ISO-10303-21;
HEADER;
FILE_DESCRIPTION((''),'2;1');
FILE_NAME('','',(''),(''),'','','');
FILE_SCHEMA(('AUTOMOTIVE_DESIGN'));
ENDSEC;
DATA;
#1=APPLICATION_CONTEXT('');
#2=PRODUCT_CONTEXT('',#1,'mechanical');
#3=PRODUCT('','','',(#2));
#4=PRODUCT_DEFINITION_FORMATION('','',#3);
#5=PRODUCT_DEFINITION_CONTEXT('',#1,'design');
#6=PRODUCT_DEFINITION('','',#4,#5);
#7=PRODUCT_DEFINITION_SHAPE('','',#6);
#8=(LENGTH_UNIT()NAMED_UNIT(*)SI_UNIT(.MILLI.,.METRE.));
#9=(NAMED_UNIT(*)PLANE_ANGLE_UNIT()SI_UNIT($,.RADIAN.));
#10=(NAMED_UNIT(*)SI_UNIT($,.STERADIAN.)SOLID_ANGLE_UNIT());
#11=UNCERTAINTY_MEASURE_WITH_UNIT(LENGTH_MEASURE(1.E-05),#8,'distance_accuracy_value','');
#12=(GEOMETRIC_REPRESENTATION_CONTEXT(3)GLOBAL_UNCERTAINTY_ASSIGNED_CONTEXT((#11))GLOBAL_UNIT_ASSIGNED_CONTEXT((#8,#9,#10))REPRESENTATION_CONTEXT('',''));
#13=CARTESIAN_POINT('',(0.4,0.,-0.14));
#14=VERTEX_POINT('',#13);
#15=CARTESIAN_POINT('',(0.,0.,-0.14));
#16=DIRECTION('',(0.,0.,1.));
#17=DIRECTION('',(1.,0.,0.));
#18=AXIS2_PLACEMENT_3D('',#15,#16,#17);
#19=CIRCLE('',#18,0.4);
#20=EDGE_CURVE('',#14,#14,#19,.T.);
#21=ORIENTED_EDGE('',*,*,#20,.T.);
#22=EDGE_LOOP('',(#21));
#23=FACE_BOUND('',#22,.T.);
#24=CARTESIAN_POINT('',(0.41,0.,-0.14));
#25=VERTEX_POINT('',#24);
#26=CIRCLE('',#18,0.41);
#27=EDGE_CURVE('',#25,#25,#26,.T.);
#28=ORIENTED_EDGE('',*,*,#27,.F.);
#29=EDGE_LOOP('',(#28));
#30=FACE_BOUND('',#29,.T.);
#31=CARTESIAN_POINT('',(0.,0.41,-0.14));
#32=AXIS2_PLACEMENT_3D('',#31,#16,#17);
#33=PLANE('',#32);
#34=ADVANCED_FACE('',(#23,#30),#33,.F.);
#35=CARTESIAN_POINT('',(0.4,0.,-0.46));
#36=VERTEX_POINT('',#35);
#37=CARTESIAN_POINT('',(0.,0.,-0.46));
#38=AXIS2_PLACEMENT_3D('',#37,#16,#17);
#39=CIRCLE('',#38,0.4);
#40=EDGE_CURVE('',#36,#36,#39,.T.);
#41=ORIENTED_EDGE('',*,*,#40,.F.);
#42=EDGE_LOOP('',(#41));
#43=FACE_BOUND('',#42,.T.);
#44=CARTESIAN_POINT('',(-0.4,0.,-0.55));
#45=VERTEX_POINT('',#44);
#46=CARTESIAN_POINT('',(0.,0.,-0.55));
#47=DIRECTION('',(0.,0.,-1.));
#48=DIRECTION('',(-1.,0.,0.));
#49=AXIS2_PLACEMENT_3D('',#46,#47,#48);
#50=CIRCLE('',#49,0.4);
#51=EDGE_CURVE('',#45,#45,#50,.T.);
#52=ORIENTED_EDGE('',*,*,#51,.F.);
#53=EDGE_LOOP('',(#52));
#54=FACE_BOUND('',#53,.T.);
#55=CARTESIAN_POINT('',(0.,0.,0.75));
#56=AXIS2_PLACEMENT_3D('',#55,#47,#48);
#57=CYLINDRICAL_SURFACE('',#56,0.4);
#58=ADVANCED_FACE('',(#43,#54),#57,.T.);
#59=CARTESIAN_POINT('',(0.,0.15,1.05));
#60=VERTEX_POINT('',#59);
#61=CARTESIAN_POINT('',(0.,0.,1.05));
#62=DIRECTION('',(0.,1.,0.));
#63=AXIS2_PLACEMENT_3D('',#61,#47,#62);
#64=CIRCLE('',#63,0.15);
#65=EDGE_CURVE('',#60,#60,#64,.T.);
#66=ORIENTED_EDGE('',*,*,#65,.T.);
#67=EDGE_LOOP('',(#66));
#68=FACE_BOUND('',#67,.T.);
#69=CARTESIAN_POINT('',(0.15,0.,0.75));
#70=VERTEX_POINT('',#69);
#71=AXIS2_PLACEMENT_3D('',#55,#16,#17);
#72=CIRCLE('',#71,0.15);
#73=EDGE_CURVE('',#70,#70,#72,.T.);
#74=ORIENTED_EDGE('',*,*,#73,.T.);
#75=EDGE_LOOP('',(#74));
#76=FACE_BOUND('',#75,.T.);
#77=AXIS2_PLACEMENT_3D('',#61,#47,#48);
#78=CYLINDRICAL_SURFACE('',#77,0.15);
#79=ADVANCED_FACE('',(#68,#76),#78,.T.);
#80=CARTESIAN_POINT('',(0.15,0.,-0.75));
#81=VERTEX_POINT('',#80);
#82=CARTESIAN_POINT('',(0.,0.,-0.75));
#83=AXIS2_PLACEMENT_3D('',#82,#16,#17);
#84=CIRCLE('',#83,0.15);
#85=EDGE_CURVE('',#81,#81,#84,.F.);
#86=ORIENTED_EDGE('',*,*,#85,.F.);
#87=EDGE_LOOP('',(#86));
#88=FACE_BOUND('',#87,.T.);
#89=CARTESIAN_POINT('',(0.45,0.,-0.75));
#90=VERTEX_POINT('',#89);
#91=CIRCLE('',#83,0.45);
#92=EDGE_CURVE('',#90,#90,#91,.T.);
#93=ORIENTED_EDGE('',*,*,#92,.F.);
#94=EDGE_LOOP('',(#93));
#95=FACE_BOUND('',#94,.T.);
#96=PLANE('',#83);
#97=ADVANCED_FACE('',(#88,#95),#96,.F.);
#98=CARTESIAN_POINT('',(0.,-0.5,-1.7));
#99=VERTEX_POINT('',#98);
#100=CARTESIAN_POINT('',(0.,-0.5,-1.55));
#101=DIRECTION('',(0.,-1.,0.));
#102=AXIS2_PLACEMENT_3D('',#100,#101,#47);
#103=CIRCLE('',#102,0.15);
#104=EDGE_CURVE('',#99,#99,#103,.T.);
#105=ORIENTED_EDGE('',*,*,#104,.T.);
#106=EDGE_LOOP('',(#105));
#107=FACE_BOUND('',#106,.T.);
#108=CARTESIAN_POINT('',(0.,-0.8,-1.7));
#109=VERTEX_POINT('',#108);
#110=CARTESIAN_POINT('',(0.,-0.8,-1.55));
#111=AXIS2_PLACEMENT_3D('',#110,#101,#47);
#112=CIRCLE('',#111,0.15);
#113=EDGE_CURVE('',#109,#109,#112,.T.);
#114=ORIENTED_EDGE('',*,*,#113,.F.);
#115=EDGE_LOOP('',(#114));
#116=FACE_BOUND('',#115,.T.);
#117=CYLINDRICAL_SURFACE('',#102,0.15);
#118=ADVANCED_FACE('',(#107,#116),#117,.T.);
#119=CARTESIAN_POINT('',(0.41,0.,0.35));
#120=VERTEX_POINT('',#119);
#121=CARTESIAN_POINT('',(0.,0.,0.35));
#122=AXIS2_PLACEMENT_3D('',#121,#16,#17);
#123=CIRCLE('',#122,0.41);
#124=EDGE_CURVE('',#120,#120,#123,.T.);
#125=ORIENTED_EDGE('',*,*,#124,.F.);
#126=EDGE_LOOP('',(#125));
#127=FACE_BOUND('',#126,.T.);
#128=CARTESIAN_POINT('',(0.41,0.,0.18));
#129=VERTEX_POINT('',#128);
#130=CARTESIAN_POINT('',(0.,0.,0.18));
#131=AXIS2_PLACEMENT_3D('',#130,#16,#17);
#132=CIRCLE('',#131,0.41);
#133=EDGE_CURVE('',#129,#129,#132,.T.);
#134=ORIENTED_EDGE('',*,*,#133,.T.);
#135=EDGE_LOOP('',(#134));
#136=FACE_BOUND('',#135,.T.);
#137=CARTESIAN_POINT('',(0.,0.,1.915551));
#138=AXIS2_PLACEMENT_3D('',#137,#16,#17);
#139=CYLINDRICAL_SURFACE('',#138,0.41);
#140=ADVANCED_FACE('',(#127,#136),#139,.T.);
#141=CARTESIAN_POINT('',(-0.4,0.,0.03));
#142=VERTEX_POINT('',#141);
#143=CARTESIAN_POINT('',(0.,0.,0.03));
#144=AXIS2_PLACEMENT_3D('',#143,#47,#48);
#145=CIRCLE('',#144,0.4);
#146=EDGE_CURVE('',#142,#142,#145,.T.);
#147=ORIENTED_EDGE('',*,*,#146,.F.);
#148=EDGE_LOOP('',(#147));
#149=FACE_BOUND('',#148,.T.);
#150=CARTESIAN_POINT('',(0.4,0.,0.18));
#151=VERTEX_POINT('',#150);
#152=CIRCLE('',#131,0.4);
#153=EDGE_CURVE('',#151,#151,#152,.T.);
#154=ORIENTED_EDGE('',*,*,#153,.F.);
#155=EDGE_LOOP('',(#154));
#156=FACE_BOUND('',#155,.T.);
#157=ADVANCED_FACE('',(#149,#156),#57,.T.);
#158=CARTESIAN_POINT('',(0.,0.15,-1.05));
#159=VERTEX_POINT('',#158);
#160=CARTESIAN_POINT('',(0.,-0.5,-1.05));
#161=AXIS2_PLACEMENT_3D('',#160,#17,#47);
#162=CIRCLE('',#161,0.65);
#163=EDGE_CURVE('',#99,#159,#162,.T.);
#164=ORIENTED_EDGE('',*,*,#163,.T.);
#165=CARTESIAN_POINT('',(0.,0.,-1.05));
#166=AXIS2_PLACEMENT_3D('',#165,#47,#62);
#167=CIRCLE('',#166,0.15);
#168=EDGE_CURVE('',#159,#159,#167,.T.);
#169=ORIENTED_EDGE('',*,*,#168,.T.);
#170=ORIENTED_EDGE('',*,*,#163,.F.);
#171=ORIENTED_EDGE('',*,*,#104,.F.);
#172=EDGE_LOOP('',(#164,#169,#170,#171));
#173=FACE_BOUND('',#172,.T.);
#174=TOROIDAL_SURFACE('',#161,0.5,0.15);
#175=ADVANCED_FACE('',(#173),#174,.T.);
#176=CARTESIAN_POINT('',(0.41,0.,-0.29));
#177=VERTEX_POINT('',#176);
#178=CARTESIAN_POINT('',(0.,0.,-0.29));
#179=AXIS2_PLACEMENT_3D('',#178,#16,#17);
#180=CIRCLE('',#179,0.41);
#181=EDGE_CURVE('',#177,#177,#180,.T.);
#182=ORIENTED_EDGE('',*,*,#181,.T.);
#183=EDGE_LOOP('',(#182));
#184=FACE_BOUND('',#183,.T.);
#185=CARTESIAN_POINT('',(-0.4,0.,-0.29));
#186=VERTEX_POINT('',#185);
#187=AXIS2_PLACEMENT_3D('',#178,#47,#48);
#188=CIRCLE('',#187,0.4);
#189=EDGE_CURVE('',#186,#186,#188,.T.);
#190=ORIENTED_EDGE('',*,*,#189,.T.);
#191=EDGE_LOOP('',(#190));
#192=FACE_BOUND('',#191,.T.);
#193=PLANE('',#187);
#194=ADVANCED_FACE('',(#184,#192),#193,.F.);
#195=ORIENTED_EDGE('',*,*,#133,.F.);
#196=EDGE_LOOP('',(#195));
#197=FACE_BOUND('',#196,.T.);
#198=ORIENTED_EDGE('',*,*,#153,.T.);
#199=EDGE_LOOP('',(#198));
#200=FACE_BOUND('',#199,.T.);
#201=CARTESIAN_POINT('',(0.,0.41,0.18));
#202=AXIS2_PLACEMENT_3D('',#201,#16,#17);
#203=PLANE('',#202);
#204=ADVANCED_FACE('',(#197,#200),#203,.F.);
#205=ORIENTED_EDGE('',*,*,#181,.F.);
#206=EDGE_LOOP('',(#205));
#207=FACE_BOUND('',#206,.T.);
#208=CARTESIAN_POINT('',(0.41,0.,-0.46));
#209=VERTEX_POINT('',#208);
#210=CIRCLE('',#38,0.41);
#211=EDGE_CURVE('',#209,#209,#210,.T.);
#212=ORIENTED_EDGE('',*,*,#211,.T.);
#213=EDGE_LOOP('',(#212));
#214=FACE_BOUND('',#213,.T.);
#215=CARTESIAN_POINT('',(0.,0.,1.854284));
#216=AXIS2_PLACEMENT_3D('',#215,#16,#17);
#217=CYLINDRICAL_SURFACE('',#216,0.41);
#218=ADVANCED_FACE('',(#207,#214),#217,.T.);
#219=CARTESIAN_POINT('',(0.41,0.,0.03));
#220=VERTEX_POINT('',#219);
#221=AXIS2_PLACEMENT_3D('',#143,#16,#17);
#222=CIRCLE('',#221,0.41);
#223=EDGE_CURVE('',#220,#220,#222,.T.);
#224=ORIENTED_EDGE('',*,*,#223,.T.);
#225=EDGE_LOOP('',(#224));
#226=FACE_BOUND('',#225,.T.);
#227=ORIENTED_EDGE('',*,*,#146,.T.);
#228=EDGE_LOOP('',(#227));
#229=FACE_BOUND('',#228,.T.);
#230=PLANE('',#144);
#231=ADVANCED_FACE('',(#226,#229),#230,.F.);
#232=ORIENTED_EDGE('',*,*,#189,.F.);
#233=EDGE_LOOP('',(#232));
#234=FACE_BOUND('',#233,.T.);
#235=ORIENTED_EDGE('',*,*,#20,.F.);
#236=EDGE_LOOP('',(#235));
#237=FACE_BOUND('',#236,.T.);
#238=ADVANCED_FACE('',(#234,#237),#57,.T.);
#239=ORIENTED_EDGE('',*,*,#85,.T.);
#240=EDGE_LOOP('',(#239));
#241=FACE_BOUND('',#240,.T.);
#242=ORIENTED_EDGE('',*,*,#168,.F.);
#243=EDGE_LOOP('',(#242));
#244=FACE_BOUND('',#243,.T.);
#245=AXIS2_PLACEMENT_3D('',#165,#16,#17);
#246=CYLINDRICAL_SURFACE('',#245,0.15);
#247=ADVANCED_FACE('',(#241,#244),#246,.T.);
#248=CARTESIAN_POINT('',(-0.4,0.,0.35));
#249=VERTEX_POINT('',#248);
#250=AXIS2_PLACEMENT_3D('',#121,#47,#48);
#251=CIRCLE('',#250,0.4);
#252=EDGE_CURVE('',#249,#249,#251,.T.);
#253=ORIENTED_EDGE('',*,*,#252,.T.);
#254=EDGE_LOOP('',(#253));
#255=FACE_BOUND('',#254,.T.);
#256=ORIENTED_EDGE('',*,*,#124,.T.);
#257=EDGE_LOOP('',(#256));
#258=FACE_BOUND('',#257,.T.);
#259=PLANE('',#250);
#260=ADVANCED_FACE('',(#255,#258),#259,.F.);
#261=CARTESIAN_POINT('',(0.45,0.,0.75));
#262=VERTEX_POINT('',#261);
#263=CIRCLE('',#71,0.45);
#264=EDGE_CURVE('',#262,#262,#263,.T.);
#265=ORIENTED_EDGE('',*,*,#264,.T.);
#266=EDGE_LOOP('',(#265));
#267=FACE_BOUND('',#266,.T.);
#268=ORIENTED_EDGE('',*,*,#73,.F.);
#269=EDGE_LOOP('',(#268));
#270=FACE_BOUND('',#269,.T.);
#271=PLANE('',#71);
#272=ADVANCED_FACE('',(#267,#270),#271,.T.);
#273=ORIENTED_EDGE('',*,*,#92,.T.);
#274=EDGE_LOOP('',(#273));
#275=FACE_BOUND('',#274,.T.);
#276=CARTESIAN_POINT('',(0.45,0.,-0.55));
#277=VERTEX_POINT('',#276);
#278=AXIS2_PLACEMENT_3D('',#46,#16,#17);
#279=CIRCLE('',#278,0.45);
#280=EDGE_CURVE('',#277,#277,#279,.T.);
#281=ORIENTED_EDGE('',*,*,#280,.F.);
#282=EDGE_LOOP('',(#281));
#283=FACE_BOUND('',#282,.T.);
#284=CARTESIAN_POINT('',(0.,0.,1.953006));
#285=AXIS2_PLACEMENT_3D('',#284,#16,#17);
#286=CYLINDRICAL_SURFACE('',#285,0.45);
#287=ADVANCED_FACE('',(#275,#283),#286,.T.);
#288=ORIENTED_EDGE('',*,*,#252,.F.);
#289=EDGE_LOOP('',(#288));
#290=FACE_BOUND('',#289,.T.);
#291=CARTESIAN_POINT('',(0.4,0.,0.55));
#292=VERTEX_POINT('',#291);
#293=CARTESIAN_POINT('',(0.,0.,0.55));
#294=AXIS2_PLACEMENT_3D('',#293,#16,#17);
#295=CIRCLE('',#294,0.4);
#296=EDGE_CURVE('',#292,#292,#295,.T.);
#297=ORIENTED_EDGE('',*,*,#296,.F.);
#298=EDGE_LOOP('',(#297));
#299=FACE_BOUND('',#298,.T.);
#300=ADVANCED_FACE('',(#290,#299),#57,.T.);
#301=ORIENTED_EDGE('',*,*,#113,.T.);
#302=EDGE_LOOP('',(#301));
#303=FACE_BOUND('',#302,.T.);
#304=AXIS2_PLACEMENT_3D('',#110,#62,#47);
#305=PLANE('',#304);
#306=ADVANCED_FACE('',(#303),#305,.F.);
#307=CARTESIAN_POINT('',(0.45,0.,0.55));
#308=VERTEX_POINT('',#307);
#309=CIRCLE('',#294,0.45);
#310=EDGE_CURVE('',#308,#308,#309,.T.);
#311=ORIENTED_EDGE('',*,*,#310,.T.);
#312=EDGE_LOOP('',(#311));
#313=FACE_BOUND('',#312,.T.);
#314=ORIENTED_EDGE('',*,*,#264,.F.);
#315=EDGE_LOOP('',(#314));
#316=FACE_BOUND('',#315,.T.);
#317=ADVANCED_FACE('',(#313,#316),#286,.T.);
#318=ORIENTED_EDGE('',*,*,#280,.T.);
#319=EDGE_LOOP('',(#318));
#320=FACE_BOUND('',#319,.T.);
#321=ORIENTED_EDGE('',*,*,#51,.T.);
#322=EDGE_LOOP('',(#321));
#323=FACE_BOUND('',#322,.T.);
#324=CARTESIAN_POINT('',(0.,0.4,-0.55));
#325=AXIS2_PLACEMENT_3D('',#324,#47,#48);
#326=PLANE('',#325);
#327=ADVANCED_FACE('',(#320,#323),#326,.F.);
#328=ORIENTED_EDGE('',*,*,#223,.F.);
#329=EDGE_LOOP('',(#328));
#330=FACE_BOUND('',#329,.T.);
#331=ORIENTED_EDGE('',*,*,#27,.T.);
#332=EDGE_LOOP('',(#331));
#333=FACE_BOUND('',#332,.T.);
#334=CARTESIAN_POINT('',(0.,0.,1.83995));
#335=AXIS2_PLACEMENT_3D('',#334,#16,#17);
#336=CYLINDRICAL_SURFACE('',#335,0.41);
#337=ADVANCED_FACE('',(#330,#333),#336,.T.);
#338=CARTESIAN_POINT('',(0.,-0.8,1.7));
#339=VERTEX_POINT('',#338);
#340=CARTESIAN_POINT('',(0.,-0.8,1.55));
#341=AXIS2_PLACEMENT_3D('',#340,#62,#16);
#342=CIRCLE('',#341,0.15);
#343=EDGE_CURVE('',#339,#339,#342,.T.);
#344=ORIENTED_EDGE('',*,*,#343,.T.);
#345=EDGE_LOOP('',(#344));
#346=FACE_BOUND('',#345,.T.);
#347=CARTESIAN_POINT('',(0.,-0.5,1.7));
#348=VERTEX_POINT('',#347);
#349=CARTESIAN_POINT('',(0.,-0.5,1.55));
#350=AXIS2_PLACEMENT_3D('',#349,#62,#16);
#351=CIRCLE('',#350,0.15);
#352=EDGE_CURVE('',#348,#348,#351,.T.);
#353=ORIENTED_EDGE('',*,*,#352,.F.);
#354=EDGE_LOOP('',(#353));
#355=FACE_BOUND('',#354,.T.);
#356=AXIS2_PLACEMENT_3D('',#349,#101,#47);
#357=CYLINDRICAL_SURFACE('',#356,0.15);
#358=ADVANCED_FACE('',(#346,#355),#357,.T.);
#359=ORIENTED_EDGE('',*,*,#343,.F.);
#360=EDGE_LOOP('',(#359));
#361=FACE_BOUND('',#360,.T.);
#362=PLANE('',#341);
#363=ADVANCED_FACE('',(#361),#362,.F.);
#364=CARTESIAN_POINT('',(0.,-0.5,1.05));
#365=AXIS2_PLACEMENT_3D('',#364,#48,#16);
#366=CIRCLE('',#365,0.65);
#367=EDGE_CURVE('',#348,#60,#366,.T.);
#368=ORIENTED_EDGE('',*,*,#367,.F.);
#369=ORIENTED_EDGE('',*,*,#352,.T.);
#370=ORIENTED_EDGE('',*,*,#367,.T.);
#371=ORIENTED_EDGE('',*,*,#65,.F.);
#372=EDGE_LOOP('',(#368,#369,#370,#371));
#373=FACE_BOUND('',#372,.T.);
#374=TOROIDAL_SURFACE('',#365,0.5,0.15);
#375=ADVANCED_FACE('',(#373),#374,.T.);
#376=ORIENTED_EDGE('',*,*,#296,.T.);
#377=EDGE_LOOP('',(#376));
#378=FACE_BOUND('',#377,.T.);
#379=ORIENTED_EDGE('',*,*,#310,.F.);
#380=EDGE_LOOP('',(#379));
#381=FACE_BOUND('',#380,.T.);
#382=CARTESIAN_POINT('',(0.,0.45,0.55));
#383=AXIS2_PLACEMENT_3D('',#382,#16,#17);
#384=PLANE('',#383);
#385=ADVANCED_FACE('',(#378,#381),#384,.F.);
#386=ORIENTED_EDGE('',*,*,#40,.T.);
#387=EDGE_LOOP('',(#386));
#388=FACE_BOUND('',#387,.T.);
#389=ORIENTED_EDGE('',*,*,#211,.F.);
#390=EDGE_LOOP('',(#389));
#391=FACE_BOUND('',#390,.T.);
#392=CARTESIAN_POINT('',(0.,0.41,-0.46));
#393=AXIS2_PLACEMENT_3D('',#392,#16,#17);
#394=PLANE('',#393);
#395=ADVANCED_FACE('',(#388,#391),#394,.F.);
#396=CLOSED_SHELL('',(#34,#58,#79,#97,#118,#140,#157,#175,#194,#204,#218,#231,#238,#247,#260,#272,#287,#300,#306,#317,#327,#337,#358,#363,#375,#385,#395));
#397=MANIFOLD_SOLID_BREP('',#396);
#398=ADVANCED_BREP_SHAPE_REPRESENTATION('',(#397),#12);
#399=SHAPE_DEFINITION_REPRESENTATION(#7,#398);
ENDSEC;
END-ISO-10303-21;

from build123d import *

# Parameters (mm, degrees)
ESBO_O1_R                = 0.4
RESSALTO_EXTRUS_O1_DEPTH = 0.75
VARREDURA1_OUTLINE_R     = 0.15
VARREDURA1_ANGLE         = 90
VARREDURA1_2_OUTLINE_R   = 0.15
VARREDURA1_2_DEPTH       = 1.0500001
VARREDURA1_START         = -0.8
VARREDURA1_3_OUTLINE_R   = 0.15
VARREDURA1_3_DEPTH       = 0.3000001
ESBO_O8_W                = 0.17
ESBO_O8_H                = 0.41
ESBO_O9_W                = 0.17
ESBO_O9_H                = 0.41
ESBO_O10_W               = 0.17
ESBO_O10_H               = 0.41


with BuildPart() as part:
    # Esboço1 → Ressalto-extrusão1 (new, symmetric)
    with BuildSketch(Plane.XY):
        Circle(ESBO_O1_R)
    extrude(amount=RESSALTO_EXTRUS_O1_DEPTH, both=True)



with BuildPart() as body_2:
    # Varredura1: read off the stored shape, not the designer's step
    # Varredura1 outline → Varredura1 (revolve)
    with BuildSketch(Plane(origin=(0, -0.5, 1.05), x_dir=(0, 1, 0), z_dir=(0, 0, -1))):
        with Locations((0.5, 0)):
            Circle(VARREDURA1_OUTLINE_R)
    varredura1 = revolve(axis=Axis((0, -0.5, 1.05), (1, 0, 0)), revolution_arc=VARREDURA1_ANGLE)


with BuildPart() as part_1:
    add(part.part)

    add(body_2.part)  # Varredura1 2 merges body 2
    # Varredura1 2 outline → Varredura1 2 (add)
    with BuildSketch(Plane.XY):
        Circle(VARREDURA1_2_OUTLINE_R)
    varredura1_2 = extrude(amount=VARREDURA1_2_DEPTH)

    # Varredura1 3 outline → Varredura1 3 (add)
    with BuildSketch(Plane(origin=(0, 0, 0), x_dir=(1, 0, 0), z_dir=(0, 1, 0)).offset(VARREDURA1_START)):
        with Locations((0, -1.55)):
            Circle(VARREDURA1_3_OUTLINE_R)
    varredura1_3 = extrude(amount=VARREDURA1_3_DEPTH)

    # Espelhar1: Varredura1, Varredura1 2, Varredura1 3 across plane
    add(varredura1.mirror(Plane.XY))
    add(varredura1_2.mirror(Plane.XY))
    add(varredura1_3.mirror(Plane.XY))

    # Esboço7 → Revolução1 (revolve)
    with BuildSketch(Plane(origin=(0, 0, 0), x_dir=(0, 0, -1), z_dir=(1, 0, 0))):
        Polygon((-0.75, 0), (-0.75, 0.45), (-0.55, 0.45), (-0.55, 0.4), (0.55, 0.4), (0.55, 0.45), (0.75, 0.45), (0.75, 0), align=None)
    revolve(axis=Axis((0, 0, 1.953006301), (0, 0, -1)))

    # Esboço8 → Revolução2 (revolve)
    with BuildSketch(Plane(origin=(0, 0, 0), x_dir=(0, 0, -1), z_dir=(1, 0, 0))):
        with Locations((-0.265, 0.205)):
            Rectangle(ESBO_O8_W, ESBO_O8_H)
    revolve(axis=Axis((0, 0, 1.915551386), (0, 0, -1)))

    # Esboço9 → Revolução3 (revolve)
    with BuildSketch(Plane(origin=(0, 0, 0), x_dir=(0, 0, -1), z_dir=(1, 0, 0))):
        with Locations((0.055, 0.205)):
            Rectangle(ESBO_O9_W, ESBO_O9_H)
    revolve(axis=Axis((0, 0, 1.839950085), (0, 0, -1)))

    # Esboço10 → Revolução4 (revolve)
    with BuildSketch(Plane(origin=(0, 0, 0), x_dir=(0, 0, -1), z_dir=(1, 0, 0))):
        with Locations((0.375, 0.205)):
            Rectangle(ESBO_O10_W, ESBO_O10_H)
    revolve(axis=Axis((0, 0, 1.854283933), (0, 0, -1)))


solid = part_1.part
